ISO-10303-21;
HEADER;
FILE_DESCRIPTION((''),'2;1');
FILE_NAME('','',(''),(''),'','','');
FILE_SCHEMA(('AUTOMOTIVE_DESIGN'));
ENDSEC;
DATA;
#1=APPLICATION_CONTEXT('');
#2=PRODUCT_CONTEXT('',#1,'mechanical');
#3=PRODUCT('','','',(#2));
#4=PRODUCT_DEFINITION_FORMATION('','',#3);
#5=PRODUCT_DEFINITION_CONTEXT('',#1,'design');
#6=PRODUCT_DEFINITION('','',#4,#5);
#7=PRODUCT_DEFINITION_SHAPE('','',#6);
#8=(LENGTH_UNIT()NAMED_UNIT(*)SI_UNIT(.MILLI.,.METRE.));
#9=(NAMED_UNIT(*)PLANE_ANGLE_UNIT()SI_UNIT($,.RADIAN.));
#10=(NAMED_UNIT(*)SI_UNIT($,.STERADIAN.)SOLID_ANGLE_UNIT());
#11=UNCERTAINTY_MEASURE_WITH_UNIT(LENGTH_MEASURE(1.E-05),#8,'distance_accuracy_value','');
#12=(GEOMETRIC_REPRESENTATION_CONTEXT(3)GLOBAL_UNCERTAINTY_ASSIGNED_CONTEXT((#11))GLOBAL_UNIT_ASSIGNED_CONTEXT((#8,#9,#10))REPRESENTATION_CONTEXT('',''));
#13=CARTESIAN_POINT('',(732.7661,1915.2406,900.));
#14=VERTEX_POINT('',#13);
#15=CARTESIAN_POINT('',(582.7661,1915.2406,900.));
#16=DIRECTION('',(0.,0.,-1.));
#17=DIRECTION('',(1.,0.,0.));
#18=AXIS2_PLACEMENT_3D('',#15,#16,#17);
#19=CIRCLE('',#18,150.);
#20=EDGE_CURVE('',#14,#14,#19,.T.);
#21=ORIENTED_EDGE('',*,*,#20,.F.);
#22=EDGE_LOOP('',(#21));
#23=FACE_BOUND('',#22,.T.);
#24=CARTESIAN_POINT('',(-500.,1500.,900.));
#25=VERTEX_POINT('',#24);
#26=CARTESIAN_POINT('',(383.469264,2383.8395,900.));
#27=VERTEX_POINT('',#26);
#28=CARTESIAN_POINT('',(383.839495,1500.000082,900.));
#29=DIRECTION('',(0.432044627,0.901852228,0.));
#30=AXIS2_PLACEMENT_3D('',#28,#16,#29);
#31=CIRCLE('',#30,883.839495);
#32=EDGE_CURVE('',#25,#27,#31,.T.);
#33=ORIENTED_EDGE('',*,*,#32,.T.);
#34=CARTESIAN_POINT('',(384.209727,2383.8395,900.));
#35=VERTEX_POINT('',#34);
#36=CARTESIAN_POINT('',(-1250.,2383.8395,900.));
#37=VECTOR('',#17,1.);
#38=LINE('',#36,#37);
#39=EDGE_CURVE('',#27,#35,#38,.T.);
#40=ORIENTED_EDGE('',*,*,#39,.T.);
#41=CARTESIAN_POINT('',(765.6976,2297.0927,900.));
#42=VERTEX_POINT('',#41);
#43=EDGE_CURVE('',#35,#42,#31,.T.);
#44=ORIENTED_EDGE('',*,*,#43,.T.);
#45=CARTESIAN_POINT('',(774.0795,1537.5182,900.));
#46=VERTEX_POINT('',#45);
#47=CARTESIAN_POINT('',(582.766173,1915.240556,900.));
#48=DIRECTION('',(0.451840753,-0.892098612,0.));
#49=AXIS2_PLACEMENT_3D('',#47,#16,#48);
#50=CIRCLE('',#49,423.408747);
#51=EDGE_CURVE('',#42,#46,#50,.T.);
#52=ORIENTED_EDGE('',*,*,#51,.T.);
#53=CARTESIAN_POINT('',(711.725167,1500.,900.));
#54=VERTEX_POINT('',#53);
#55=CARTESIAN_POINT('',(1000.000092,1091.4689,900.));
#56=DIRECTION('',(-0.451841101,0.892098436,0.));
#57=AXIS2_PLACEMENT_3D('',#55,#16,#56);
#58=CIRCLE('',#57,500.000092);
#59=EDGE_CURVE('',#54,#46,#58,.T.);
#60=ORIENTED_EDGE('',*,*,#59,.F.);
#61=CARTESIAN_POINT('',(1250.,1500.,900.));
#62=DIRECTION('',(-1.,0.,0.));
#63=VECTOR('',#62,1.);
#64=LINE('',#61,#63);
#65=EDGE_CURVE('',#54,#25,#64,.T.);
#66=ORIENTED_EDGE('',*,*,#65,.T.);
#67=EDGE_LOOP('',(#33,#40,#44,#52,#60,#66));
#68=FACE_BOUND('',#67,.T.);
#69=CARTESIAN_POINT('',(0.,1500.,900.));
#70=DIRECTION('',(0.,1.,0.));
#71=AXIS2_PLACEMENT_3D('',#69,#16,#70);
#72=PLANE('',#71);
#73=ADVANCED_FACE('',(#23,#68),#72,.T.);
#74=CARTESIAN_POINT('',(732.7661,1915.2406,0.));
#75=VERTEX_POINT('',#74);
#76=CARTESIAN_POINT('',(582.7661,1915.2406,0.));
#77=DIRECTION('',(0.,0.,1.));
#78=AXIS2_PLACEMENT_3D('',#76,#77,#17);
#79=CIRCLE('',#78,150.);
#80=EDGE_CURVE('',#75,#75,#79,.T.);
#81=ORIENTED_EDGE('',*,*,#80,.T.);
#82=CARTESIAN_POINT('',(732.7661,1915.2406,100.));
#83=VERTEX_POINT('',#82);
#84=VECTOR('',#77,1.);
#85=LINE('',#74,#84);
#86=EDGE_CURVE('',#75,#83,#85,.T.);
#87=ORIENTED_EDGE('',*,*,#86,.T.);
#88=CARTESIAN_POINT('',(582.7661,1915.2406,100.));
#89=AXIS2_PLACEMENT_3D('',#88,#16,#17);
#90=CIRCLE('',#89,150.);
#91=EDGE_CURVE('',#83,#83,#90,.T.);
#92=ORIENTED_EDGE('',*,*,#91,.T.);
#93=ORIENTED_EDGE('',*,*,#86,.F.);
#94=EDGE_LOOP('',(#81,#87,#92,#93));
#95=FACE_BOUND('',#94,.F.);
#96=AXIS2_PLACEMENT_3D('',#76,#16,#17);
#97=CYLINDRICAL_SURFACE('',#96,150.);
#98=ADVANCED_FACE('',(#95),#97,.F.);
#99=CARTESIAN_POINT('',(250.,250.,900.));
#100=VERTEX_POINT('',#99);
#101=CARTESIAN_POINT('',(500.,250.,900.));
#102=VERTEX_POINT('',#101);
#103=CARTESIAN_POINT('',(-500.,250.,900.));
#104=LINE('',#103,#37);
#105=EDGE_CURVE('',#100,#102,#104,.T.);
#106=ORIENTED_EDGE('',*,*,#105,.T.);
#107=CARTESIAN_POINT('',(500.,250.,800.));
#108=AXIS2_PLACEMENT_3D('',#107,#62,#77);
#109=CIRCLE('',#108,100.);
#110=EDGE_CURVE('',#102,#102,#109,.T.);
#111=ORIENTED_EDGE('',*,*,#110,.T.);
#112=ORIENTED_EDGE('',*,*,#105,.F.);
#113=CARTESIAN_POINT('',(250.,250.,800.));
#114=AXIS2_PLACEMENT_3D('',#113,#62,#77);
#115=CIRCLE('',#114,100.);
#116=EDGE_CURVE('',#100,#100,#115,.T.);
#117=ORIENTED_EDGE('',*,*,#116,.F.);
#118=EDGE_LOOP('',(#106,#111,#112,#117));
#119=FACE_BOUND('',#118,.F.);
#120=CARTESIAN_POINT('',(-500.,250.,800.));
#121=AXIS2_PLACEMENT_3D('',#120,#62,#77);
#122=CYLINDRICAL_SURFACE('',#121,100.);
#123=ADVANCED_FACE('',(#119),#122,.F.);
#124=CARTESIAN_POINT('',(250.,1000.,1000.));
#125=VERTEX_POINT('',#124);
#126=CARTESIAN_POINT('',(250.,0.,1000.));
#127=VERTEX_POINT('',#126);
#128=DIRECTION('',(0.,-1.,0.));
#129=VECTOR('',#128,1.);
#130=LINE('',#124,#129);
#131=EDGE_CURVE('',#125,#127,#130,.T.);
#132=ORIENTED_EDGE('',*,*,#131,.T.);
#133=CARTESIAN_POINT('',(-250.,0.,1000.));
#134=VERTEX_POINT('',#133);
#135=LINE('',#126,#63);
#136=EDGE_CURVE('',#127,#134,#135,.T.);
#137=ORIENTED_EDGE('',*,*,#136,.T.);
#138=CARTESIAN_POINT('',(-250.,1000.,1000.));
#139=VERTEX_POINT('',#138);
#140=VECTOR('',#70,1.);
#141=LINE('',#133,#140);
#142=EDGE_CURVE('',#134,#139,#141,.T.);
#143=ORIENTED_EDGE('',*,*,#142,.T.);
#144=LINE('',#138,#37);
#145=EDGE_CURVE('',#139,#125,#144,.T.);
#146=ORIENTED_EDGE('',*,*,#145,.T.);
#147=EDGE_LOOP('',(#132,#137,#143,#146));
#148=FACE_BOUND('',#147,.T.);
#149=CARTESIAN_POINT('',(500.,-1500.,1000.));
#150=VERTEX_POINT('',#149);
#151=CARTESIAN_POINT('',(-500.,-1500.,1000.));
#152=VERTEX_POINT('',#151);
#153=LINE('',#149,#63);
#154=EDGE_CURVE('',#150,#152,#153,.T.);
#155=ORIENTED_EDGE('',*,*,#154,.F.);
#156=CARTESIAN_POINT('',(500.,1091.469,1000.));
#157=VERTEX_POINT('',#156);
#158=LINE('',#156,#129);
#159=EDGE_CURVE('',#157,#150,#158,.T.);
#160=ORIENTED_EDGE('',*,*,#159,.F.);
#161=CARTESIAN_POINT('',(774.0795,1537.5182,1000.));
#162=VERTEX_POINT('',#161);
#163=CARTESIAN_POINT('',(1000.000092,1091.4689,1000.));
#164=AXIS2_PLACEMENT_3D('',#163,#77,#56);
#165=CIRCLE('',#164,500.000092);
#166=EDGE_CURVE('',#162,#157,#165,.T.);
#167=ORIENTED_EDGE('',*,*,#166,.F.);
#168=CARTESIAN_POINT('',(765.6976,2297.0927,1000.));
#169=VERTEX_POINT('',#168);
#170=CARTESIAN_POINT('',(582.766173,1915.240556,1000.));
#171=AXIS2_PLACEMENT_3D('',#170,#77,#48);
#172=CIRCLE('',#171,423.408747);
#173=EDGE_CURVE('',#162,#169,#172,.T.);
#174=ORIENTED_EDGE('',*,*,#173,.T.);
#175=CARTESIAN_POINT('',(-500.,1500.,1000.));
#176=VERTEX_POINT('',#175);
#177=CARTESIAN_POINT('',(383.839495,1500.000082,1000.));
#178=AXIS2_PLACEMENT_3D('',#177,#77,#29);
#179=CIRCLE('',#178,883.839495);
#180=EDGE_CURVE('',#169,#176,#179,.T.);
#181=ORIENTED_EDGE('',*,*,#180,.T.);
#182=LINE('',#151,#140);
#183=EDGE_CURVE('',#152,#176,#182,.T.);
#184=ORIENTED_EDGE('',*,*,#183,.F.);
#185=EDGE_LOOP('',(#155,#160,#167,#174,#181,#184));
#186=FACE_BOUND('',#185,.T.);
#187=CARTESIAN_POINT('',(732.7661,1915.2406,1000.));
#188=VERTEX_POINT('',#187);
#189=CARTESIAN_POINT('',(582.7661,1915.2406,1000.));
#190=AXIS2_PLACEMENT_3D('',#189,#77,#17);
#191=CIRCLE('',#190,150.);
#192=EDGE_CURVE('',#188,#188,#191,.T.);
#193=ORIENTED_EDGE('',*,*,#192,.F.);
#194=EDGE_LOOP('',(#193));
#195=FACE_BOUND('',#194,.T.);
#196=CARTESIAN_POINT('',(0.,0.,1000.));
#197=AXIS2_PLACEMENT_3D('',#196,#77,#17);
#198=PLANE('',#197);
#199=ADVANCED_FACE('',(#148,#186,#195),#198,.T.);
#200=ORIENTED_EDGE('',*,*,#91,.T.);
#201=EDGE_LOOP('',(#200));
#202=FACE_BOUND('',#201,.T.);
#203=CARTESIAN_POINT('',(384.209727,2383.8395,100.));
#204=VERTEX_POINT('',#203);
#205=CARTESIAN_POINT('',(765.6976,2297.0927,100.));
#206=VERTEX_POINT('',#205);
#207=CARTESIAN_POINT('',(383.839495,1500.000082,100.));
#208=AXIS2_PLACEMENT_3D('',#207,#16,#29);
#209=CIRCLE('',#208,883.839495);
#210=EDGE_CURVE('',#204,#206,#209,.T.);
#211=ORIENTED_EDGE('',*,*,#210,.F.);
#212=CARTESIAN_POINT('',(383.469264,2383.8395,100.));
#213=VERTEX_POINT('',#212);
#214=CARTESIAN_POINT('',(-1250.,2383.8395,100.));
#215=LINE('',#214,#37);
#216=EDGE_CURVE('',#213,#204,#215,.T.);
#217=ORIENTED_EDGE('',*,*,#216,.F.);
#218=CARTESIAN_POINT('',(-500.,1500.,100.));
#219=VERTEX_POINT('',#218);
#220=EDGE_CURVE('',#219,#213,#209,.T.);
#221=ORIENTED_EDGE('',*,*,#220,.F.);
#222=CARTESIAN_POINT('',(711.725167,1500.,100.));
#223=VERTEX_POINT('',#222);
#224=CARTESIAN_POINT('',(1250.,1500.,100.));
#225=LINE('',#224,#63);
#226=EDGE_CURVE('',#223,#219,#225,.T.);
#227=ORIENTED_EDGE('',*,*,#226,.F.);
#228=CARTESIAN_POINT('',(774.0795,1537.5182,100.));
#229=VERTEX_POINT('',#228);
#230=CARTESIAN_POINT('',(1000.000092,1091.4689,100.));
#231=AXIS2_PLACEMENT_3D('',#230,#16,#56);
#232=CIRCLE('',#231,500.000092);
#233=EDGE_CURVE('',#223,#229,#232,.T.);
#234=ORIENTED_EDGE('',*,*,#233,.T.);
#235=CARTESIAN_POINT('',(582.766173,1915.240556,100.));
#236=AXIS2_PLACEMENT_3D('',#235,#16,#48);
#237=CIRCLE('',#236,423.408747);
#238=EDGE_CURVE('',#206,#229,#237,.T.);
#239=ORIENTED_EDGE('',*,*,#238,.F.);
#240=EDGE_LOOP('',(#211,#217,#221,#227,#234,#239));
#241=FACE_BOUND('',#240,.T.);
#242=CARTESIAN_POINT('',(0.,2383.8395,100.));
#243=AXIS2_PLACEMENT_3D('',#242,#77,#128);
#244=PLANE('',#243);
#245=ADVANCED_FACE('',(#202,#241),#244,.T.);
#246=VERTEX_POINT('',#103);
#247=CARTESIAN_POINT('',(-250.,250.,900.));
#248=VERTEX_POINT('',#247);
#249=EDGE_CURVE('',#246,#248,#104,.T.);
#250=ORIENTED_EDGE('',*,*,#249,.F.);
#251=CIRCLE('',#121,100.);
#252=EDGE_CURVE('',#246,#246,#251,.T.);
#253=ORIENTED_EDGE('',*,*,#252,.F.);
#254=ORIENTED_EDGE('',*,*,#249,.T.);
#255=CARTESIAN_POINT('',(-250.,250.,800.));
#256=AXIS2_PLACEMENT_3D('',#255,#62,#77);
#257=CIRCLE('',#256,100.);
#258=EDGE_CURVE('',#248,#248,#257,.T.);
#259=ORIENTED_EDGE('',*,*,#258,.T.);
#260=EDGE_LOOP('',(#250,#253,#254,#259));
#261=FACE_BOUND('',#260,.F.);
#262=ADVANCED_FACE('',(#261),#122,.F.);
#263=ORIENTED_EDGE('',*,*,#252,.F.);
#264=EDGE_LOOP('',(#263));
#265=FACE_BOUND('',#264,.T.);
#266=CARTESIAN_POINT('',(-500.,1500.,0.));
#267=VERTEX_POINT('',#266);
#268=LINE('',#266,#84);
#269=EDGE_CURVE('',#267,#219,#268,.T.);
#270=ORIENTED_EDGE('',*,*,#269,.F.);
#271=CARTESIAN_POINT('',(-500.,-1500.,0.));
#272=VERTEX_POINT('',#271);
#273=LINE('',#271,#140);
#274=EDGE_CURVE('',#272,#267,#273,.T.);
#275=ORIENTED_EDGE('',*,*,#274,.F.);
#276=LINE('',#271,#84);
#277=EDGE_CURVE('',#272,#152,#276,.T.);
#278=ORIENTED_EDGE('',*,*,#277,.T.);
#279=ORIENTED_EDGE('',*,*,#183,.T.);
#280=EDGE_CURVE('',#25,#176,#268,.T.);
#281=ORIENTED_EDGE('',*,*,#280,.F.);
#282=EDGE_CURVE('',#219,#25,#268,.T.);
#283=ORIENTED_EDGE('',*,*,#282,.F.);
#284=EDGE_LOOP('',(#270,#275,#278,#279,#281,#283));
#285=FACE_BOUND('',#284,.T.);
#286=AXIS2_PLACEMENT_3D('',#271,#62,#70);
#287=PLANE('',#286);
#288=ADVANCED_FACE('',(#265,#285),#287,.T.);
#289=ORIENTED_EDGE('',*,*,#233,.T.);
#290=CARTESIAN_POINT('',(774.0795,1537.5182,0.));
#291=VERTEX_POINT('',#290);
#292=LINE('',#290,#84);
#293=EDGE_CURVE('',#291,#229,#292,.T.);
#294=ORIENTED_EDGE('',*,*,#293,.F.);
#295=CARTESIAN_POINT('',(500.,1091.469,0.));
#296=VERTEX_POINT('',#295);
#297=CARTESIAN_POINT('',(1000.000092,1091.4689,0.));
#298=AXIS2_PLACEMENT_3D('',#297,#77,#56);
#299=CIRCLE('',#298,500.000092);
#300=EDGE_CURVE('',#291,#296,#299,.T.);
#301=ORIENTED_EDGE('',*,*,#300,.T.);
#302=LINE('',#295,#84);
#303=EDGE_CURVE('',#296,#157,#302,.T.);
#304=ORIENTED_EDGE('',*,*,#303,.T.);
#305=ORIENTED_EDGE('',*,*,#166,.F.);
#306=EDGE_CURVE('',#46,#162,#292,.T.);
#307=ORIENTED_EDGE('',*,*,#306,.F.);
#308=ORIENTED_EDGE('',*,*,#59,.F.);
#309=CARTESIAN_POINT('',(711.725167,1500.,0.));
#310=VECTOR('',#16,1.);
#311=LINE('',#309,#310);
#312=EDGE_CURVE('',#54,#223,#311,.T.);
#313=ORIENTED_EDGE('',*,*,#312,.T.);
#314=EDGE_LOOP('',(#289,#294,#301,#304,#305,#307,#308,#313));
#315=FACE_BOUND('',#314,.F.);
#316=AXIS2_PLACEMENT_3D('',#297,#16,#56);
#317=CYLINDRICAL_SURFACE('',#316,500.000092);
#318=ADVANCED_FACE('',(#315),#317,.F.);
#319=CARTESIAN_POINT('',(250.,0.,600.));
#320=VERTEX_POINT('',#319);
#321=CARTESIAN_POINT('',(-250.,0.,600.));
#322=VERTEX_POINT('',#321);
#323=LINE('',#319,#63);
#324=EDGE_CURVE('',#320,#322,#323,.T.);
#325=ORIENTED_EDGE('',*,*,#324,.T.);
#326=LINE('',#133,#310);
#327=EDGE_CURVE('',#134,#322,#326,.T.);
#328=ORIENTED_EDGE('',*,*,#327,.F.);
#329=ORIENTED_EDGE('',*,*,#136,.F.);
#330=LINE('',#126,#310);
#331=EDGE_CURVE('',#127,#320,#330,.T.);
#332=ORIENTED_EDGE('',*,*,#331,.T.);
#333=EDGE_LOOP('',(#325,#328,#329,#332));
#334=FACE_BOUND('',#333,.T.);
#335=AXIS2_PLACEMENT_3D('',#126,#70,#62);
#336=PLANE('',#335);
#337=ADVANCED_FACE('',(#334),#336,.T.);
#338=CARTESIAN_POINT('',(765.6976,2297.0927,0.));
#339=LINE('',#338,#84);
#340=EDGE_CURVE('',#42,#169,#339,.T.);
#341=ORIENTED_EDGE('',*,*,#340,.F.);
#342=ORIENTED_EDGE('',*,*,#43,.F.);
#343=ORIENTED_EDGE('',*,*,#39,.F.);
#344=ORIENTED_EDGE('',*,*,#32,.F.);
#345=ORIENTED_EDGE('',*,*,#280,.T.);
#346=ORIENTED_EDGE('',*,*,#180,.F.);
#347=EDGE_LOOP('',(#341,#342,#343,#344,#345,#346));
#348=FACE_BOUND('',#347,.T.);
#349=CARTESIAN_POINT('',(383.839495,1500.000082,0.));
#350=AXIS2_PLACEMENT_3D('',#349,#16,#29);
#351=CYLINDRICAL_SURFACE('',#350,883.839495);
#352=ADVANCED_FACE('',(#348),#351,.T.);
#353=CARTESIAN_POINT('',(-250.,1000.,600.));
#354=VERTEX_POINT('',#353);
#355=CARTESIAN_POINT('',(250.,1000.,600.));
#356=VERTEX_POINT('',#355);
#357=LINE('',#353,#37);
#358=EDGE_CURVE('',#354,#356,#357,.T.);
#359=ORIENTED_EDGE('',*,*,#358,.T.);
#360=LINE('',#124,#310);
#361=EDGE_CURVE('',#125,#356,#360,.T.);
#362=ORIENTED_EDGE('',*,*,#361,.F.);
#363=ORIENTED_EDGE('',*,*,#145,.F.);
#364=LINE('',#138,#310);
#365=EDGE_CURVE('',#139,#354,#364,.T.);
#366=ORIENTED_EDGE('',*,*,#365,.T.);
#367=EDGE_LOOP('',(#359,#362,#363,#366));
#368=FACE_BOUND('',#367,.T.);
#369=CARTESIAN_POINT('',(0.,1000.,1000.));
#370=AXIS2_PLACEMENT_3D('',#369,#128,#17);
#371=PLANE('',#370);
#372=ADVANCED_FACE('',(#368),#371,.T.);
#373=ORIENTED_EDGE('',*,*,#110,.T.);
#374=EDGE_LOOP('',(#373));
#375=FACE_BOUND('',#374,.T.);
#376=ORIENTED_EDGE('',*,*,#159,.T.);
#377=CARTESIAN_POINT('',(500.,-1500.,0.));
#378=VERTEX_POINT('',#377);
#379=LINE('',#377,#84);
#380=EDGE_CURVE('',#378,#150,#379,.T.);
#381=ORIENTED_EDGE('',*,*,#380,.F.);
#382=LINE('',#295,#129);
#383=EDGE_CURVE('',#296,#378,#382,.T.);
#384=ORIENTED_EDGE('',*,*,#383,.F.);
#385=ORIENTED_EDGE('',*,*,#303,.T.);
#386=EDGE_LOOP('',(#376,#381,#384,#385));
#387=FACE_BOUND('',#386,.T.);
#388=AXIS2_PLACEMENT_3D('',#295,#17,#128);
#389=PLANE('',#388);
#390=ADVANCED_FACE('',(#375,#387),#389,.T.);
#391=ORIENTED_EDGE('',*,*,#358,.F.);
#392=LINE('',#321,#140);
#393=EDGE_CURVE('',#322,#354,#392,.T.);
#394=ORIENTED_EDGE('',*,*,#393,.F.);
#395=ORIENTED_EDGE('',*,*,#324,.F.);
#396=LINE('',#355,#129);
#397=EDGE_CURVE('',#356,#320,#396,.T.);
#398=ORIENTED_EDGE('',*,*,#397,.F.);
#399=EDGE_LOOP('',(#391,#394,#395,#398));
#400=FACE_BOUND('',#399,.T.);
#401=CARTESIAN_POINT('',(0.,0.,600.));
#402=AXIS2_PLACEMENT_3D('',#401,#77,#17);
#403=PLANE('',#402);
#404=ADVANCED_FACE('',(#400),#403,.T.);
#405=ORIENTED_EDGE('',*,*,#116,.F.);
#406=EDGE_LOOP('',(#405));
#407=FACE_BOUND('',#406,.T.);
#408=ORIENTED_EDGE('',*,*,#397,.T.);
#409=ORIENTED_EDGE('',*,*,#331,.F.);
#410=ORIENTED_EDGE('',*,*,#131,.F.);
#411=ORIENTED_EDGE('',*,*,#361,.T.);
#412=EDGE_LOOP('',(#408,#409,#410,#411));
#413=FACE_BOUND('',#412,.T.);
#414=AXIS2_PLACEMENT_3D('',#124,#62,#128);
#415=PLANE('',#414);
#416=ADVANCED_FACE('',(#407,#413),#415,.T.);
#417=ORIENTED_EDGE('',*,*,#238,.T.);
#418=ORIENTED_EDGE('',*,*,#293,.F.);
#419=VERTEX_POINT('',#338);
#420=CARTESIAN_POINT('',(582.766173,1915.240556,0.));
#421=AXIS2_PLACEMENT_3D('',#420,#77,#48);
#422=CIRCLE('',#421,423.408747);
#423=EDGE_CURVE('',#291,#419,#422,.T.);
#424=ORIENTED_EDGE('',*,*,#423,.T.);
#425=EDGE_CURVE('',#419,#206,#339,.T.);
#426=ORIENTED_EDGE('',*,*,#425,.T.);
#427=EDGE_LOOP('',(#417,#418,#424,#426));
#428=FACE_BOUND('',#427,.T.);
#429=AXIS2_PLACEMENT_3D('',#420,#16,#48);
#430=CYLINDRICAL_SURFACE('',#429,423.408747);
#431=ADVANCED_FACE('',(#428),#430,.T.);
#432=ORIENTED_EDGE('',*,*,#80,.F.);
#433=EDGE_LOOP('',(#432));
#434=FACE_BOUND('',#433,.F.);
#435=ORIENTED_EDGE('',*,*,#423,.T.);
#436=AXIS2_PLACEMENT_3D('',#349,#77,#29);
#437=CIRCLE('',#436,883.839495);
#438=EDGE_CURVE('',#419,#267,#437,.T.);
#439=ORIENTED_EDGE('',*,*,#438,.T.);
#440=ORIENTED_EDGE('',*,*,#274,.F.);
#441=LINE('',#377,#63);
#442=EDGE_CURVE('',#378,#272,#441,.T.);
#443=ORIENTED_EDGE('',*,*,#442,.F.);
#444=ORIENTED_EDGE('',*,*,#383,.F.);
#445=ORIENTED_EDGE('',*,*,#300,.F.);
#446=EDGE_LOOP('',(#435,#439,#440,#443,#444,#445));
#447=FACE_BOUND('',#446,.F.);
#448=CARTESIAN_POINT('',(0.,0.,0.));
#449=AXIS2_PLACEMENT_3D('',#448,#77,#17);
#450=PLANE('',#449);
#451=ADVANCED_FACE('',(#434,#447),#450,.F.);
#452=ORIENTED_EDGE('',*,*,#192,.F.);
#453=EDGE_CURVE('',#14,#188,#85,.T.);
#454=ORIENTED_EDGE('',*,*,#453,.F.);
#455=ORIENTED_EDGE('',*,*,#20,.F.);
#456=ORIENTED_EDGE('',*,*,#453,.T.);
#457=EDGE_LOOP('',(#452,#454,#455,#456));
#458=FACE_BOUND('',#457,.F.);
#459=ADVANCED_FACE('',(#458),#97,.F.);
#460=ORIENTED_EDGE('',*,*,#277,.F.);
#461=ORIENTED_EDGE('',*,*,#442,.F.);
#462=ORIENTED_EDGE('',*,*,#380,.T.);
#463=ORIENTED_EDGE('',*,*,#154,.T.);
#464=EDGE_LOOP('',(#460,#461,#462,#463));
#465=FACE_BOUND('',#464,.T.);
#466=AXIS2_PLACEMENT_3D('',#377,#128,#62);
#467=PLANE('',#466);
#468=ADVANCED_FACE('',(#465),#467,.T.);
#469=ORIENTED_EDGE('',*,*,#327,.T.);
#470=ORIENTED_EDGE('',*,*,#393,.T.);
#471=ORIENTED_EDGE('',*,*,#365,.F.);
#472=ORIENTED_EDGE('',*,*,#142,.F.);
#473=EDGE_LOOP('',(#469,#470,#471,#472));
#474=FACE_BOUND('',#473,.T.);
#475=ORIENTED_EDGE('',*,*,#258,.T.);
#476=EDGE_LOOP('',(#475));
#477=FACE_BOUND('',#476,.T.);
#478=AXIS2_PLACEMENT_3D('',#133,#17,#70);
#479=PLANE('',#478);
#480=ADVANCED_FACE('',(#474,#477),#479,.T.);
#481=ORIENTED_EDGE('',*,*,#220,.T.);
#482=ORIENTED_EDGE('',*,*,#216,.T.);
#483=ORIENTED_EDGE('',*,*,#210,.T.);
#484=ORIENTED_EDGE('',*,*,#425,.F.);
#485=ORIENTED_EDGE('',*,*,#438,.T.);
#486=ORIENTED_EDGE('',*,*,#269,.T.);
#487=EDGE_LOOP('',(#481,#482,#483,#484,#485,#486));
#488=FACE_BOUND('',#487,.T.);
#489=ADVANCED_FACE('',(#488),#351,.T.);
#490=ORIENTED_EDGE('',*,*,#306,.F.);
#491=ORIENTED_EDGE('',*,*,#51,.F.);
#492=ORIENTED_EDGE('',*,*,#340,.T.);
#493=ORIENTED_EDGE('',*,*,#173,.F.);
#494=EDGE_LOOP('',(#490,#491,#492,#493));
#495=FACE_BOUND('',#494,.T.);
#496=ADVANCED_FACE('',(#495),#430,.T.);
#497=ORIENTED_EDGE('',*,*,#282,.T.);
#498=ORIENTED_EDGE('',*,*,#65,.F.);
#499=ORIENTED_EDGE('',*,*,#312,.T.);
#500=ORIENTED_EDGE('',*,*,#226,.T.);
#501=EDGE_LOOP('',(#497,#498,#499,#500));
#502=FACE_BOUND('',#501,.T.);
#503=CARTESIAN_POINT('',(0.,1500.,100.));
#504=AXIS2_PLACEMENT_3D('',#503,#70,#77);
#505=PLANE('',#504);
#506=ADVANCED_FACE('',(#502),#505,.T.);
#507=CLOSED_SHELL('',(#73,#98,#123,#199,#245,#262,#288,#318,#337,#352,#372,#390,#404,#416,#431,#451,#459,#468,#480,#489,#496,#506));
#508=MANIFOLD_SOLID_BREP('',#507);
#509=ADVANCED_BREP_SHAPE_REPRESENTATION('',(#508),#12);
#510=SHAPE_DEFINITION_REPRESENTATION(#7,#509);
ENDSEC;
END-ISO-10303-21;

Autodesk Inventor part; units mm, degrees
ref_plane "YZ Plane" through (0, 0, 0) normal (1, 0, 0) x (0, 1, 0)
ref_plane "XZ Plane" through (0, 0, 0) normal (0, 1, 0) x (-1, 0, 0)
sketch "Skizze1" plane through (0, 0, 0) normal (0, 0, 1) x (1, 0, 0)
  line L0 (-1066.0722, 0) -> (1356.4088, 0) construction
  line L1 (0, -2329.2869) -> (0, 3475.7215) construction
  line L2 (500, 1091.469) -> (500, -1500)
  line L3 (500, -1500) -> (-500, -1500)
  line L4 (-500, -1500) -> (-500, 1500)
  line L5 (-500, 1500) -> (500, -1500) construction
  line L6 (500, 1500) -> (-500, -1500) construction
  arc A0 (765.6976, 2297.0927) -> (-500, 1500) centre (383.8395, 1500) ccw
  arc A1 (774.0795, 1537.5182) -> (765.6976, 2297.0927) centre (582.7661, 1915.2406) ccw
  circle A2 centre (582.7661, 1915.2406) radius 150
  arc A3 (774.0795, 1537.5182) -> (500, 1091.469) centre (1000, 1091.469) ccw
  point P0 (0, 0)
  dimension "d0" = 1000
  dimension "d1" = 3000
  dimension "d2" = 423.4087
  dimension "d3" = 300
  dimension "d5" = 500
extrude "Extrusion1" add sketch "Skizze1" along normal blind 1000
ref_plane "Arbeitsebene1" through (0, -1500, 0) normal (-1, 0, 0) x (0, 0, 1)
sketch "Skizze2" plane through (0, -1500, 0) normal (-1, 0, 0) x (0, 0, 1)
  line L0 (0, 3000) -> (1000, 3000) projected
  line L1 (100, 3000) -> (908.6027, 3000)
  line L2 (0, 3883.8395) -> (1000, 3883.8395) construction
  line L3 (100, 3000) -> (900, 3000)
  line L4 (900, 3000) -> (900, 3883.8395)
  line L5 (900, 3883.8395) -> (100, 3883.8395)
  line L6 (100, 3883.8395) -> (100, 3000)
  line L7 (1000, 3000) -> (1000, 3883.8395) construction
  point P0 (0, 1500)
  point P1 (1000, 3797.0927)
  dimension "d8" = 800
  dimension "d9" = 100
extrude "Extrusion2" cut sketch "Skizze2" along normal mid plane 2500
sketch "Skizze3" plane through (0, 0, 1000) normal (0, 0, 1) x (1, 0, 0)
  point P0 (0, 0)
sketch "Skizze4" plane through (0, 0, 1000) normal (0, 0, 1) x (1, 0, 0)
  point P0 (0, 0)
sketch "Skizze5" plane through (0, 0, 1000) normal (0, 0, 1) x (1, 0, 0)
  line L0 (-500, 1500) -> (-500, -1500) construction
  line L1 (0, 0) -> (-250, 0)
  line L2 (-250, 0) -> (-250, 1000)
  line L3 (-250, 1000) -> (0, 1000)
  line L4 (0, 1000) -> (250, 1000)
  line L5 (250, 1000) -> (250, 0)
  line L6 (250, 0) -> (0, 0)
  line L7 (-250, 1000) -> (250, 1000)
  line L8 (250, 1000) -> (250, 0)
  line L9 (250, 0) -> (-250, 0)
  line L10 (-250, 0) -> (-250, 1000)
  dimension "d13" = 250
  dimension "d14" = 1000
  dimension "d15" = 250
extrude "Extrusion3" cut sketch "Skizze5" against normal blind 400
sketch "Skizze6" plane through (-500, -1500, 0) normal (-1, 0, 0) x (0, 0, 1)
  point P0 (0, 1500)
sketch "Skizze7" plane through (-500, -1500, 0) normal (-1, 0, 0) x (0, 0, 1)
  point P0 (0, 1500)
sketch "Skizze8" plane through (-500, -1500, 0) normal (0, -1, 0) x (1, 0, 0)
  point P0 (500, 0)
sketch "Skizze9" plane through (-500, -1500, 0) normal (-1, 0, 0) x (0, 0, 1)
  line L0 (1000, 0) -> (800, 0)
  circle A0 centre (800, 1750) radius 100
  point P0 (0, 1500)
extrude "Extrusion4" cut sketch "Skizze9" against normal through all
sketch "Skizze10" plane through (0, 0, 1000) normal (0, 0, 1) x (1, 0, 0)
  point P0 (0, 0)
properties part number "Straße"
